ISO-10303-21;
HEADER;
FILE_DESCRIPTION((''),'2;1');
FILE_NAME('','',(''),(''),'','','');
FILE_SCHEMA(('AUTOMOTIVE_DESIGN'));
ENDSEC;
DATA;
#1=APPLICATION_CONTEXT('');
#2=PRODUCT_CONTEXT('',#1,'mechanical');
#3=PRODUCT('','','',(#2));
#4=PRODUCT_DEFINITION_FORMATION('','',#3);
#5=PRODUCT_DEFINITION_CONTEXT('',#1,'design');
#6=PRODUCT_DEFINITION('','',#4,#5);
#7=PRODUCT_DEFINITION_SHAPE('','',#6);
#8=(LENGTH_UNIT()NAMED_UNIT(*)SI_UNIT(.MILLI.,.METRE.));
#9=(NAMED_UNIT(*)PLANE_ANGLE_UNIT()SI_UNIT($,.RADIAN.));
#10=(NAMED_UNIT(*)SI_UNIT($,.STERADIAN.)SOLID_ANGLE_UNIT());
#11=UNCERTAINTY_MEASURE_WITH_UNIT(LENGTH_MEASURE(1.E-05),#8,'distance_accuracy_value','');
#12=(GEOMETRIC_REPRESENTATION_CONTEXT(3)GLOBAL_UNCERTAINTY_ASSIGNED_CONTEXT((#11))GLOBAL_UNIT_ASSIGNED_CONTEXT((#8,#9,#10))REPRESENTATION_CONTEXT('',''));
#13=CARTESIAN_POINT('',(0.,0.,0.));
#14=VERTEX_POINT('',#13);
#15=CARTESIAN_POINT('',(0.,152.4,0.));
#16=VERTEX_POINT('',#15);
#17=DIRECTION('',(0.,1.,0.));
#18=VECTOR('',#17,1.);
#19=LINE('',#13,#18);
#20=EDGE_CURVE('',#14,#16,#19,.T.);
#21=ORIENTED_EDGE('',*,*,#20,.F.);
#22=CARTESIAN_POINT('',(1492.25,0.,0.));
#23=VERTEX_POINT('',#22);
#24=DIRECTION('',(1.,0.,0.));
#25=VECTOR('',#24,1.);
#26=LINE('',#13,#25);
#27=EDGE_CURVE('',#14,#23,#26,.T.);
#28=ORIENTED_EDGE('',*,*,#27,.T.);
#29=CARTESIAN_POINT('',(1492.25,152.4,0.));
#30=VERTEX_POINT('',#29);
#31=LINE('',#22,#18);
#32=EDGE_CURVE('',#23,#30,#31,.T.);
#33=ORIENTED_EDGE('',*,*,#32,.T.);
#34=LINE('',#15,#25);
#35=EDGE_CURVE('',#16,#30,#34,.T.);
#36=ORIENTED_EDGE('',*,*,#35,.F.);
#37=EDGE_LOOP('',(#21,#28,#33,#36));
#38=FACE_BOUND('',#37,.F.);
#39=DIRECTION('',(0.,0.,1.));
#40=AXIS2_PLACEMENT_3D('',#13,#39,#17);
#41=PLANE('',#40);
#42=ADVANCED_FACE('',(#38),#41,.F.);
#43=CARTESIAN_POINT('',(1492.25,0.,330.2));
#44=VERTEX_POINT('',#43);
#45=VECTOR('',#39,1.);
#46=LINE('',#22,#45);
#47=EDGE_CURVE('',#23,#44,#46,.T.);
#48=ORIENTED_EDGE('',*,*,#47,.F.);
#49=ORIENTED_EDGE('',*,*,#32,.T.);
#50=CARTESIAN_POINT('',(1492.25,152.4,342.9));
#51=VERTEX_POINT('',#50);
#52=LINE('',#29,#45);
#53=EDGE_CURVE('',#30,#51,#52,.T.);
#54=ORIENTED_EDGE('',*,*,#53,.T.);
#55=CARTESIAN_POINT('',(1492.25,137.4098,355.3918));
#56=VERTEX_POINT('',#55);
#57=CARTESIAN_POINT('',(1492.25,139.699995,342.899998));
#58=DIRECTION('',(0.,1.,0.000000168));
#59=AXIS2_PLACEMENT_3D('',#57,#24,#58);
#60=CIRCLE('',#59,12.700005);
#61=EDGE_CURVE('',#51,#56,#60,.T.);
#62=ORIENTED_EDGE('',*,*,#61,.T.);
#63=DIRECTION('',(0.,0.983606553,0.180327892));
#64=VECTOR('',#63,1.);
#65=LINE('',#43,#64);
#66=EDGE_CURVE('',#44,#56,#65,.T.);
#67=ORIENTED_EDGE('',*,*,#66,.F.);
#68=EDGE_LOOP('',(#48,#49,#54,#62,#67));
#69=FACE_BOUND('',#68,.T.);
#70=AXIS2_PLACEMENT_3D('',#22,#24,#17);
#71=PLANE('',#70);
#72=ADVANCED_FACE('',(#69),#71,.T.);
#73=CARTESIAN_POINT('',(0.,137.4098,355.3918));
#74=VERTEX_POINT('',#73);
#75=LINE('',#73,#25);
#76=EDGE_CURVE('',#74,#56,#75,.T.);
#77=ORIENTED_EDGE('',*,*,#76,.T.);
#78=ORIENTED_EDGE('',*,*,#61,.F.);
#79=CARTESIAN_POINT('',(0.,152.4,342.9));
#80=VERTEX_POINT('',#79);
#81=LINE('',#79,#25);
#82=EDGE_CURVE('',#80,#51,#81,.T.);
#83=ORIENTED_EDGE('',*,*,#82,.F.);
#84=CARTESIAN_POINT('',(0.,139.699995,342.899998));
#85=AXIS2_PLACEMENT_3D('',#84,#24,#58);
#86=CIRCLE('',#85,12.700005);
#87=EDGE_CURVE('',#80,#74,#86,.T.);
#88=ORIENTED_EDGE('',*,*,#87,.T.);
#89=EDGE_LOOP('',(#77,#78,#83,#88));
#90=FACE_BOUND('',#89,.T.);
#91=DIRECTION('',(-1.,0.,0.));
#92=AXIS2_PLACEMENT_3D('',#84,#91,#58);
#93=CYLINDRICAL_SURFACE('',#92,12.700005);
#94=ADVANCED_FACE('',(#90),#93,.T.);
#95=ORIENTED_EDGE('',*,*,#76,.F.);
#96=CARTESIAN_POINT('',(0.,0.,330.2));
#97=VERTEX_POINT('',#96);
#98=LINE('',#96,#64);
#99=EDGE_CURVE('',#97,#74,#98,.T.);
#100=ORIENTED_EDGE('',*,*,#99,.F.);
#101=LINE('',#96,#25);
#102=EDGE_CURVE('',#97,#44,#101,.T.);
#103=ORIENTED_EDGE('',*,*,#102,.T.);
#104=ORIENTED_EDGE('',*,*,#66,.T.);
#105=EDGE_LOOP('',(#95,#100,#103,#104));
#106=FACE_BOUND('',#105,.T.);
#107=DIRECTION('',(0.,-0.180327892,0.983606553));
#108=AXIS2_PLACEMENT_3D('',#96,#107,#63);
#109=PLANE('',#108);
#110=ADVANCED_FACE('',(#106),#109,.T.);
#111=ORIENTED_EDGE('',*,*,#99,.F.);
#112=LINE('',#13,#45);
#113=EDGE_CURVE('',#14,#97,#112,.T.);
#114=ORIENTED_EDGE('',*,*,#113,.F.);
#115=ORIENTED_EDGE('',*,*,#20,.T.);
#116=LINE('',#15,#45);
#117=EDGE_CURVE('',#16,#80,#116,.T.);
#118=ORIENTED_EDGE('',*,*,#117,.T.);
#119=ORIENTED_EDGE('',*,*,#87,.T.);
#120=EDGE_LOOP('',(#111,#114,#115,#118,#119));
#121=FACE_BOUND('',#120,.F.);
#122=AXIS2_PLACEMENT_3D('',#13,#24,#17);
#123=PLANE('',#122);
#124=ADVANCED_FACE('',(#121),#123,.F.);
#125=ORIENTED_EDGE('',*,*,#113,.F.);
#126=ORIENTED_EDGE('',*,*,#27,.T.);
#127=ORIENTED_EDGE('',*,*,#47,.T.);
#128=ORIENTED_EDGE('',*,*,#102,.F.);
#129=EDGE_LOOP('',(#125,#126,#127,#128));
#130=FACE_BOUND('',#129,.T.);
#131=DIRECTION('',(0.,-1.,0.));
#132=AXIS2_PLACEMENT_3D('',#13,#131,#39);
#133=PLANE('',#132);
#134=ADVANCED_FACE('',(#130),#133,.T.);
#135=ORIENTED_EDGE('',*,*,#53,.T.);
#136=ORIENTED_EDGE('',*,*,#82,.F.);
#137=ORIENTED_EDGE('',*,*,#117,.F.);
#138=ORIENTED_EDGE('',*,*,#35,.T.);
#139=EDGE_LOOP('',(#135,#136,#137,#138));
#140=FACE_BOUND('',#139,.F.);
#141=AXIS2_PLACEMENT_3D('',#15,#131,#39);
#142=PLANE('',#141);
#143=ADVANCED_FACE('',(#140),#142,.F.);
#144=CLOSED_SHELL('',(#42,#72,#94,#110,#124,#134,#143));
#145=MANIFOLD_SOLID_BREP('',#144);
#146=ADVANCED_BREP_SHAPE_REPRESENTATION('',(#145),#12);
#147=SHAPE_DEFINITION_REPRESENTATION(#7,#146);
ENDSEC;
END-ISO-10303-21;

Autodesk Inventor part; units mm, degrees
ref_plane "YZ Plane" through (0, 0, 0) normal (1, 0, 0) x (0, 1, 0)
ref_plane "XZ Plane" through (0, 0, 0) normal (0, 1, 0) x (-1, 0, 0)
ref_plane "XY Plane" through (0, 0, 0) normal (0, 0, 1) x (1, 0, 0)
sketch "Profile" plane through (0, 0, 0) normal (0, 0, 1) x (1, 0, 0)
  line L0 (0, 0) -> (0, 330.2)
  line L1 (0, 0) -> (152.4, 0)
  line L2 (152.4, 0) -> (152.4, 342.9)
  line L3 (152.4, 342.9) -> (139.7, 342.9) construction
  line L4 (152.4, 342.9) -> (139.7, 342.9) construction
  arc A0 (152.4, 342.9) -> (137.4098, 355.3918) centre (139.7, 342.9) ccw
  line L5 (0, 330.2) -> (137.4098, 355.3918)
  dimension "d0" = 330.2
  dimension "d1" = 152.4
  dimension "d2" = 342.9
  dimension "d3" = 12.7
  dimension "d4" = 12.7
sketch "Sketch1" plane through (0, 0, 0) normal (1, 0, 0) x (0, 1, 0)
  line L0 (0, 0) -> (0, 330.2)
  line L1 (0, 0) -> (152.4, 0)
  line L2 (152.4, 0) -> (152.4, 342.9)
  line L3 (152.4, 342.9) -> (139.7, 342.9) construction
  line L4 (152.4, 342.9) -> (139.7, 342.9) construction
  arc A0 (152.4, 342.9) -> (137.4098, 355.3918) centre (139.7, 342.9) ccw
  line L5 (0, 330.2) -> (137.4098, 355.3918)
extrude "Extrusion1" add sketch "Sketch1" along normal blind 1492.25
properties part number "G" material "Granite, Cut, Polished"
